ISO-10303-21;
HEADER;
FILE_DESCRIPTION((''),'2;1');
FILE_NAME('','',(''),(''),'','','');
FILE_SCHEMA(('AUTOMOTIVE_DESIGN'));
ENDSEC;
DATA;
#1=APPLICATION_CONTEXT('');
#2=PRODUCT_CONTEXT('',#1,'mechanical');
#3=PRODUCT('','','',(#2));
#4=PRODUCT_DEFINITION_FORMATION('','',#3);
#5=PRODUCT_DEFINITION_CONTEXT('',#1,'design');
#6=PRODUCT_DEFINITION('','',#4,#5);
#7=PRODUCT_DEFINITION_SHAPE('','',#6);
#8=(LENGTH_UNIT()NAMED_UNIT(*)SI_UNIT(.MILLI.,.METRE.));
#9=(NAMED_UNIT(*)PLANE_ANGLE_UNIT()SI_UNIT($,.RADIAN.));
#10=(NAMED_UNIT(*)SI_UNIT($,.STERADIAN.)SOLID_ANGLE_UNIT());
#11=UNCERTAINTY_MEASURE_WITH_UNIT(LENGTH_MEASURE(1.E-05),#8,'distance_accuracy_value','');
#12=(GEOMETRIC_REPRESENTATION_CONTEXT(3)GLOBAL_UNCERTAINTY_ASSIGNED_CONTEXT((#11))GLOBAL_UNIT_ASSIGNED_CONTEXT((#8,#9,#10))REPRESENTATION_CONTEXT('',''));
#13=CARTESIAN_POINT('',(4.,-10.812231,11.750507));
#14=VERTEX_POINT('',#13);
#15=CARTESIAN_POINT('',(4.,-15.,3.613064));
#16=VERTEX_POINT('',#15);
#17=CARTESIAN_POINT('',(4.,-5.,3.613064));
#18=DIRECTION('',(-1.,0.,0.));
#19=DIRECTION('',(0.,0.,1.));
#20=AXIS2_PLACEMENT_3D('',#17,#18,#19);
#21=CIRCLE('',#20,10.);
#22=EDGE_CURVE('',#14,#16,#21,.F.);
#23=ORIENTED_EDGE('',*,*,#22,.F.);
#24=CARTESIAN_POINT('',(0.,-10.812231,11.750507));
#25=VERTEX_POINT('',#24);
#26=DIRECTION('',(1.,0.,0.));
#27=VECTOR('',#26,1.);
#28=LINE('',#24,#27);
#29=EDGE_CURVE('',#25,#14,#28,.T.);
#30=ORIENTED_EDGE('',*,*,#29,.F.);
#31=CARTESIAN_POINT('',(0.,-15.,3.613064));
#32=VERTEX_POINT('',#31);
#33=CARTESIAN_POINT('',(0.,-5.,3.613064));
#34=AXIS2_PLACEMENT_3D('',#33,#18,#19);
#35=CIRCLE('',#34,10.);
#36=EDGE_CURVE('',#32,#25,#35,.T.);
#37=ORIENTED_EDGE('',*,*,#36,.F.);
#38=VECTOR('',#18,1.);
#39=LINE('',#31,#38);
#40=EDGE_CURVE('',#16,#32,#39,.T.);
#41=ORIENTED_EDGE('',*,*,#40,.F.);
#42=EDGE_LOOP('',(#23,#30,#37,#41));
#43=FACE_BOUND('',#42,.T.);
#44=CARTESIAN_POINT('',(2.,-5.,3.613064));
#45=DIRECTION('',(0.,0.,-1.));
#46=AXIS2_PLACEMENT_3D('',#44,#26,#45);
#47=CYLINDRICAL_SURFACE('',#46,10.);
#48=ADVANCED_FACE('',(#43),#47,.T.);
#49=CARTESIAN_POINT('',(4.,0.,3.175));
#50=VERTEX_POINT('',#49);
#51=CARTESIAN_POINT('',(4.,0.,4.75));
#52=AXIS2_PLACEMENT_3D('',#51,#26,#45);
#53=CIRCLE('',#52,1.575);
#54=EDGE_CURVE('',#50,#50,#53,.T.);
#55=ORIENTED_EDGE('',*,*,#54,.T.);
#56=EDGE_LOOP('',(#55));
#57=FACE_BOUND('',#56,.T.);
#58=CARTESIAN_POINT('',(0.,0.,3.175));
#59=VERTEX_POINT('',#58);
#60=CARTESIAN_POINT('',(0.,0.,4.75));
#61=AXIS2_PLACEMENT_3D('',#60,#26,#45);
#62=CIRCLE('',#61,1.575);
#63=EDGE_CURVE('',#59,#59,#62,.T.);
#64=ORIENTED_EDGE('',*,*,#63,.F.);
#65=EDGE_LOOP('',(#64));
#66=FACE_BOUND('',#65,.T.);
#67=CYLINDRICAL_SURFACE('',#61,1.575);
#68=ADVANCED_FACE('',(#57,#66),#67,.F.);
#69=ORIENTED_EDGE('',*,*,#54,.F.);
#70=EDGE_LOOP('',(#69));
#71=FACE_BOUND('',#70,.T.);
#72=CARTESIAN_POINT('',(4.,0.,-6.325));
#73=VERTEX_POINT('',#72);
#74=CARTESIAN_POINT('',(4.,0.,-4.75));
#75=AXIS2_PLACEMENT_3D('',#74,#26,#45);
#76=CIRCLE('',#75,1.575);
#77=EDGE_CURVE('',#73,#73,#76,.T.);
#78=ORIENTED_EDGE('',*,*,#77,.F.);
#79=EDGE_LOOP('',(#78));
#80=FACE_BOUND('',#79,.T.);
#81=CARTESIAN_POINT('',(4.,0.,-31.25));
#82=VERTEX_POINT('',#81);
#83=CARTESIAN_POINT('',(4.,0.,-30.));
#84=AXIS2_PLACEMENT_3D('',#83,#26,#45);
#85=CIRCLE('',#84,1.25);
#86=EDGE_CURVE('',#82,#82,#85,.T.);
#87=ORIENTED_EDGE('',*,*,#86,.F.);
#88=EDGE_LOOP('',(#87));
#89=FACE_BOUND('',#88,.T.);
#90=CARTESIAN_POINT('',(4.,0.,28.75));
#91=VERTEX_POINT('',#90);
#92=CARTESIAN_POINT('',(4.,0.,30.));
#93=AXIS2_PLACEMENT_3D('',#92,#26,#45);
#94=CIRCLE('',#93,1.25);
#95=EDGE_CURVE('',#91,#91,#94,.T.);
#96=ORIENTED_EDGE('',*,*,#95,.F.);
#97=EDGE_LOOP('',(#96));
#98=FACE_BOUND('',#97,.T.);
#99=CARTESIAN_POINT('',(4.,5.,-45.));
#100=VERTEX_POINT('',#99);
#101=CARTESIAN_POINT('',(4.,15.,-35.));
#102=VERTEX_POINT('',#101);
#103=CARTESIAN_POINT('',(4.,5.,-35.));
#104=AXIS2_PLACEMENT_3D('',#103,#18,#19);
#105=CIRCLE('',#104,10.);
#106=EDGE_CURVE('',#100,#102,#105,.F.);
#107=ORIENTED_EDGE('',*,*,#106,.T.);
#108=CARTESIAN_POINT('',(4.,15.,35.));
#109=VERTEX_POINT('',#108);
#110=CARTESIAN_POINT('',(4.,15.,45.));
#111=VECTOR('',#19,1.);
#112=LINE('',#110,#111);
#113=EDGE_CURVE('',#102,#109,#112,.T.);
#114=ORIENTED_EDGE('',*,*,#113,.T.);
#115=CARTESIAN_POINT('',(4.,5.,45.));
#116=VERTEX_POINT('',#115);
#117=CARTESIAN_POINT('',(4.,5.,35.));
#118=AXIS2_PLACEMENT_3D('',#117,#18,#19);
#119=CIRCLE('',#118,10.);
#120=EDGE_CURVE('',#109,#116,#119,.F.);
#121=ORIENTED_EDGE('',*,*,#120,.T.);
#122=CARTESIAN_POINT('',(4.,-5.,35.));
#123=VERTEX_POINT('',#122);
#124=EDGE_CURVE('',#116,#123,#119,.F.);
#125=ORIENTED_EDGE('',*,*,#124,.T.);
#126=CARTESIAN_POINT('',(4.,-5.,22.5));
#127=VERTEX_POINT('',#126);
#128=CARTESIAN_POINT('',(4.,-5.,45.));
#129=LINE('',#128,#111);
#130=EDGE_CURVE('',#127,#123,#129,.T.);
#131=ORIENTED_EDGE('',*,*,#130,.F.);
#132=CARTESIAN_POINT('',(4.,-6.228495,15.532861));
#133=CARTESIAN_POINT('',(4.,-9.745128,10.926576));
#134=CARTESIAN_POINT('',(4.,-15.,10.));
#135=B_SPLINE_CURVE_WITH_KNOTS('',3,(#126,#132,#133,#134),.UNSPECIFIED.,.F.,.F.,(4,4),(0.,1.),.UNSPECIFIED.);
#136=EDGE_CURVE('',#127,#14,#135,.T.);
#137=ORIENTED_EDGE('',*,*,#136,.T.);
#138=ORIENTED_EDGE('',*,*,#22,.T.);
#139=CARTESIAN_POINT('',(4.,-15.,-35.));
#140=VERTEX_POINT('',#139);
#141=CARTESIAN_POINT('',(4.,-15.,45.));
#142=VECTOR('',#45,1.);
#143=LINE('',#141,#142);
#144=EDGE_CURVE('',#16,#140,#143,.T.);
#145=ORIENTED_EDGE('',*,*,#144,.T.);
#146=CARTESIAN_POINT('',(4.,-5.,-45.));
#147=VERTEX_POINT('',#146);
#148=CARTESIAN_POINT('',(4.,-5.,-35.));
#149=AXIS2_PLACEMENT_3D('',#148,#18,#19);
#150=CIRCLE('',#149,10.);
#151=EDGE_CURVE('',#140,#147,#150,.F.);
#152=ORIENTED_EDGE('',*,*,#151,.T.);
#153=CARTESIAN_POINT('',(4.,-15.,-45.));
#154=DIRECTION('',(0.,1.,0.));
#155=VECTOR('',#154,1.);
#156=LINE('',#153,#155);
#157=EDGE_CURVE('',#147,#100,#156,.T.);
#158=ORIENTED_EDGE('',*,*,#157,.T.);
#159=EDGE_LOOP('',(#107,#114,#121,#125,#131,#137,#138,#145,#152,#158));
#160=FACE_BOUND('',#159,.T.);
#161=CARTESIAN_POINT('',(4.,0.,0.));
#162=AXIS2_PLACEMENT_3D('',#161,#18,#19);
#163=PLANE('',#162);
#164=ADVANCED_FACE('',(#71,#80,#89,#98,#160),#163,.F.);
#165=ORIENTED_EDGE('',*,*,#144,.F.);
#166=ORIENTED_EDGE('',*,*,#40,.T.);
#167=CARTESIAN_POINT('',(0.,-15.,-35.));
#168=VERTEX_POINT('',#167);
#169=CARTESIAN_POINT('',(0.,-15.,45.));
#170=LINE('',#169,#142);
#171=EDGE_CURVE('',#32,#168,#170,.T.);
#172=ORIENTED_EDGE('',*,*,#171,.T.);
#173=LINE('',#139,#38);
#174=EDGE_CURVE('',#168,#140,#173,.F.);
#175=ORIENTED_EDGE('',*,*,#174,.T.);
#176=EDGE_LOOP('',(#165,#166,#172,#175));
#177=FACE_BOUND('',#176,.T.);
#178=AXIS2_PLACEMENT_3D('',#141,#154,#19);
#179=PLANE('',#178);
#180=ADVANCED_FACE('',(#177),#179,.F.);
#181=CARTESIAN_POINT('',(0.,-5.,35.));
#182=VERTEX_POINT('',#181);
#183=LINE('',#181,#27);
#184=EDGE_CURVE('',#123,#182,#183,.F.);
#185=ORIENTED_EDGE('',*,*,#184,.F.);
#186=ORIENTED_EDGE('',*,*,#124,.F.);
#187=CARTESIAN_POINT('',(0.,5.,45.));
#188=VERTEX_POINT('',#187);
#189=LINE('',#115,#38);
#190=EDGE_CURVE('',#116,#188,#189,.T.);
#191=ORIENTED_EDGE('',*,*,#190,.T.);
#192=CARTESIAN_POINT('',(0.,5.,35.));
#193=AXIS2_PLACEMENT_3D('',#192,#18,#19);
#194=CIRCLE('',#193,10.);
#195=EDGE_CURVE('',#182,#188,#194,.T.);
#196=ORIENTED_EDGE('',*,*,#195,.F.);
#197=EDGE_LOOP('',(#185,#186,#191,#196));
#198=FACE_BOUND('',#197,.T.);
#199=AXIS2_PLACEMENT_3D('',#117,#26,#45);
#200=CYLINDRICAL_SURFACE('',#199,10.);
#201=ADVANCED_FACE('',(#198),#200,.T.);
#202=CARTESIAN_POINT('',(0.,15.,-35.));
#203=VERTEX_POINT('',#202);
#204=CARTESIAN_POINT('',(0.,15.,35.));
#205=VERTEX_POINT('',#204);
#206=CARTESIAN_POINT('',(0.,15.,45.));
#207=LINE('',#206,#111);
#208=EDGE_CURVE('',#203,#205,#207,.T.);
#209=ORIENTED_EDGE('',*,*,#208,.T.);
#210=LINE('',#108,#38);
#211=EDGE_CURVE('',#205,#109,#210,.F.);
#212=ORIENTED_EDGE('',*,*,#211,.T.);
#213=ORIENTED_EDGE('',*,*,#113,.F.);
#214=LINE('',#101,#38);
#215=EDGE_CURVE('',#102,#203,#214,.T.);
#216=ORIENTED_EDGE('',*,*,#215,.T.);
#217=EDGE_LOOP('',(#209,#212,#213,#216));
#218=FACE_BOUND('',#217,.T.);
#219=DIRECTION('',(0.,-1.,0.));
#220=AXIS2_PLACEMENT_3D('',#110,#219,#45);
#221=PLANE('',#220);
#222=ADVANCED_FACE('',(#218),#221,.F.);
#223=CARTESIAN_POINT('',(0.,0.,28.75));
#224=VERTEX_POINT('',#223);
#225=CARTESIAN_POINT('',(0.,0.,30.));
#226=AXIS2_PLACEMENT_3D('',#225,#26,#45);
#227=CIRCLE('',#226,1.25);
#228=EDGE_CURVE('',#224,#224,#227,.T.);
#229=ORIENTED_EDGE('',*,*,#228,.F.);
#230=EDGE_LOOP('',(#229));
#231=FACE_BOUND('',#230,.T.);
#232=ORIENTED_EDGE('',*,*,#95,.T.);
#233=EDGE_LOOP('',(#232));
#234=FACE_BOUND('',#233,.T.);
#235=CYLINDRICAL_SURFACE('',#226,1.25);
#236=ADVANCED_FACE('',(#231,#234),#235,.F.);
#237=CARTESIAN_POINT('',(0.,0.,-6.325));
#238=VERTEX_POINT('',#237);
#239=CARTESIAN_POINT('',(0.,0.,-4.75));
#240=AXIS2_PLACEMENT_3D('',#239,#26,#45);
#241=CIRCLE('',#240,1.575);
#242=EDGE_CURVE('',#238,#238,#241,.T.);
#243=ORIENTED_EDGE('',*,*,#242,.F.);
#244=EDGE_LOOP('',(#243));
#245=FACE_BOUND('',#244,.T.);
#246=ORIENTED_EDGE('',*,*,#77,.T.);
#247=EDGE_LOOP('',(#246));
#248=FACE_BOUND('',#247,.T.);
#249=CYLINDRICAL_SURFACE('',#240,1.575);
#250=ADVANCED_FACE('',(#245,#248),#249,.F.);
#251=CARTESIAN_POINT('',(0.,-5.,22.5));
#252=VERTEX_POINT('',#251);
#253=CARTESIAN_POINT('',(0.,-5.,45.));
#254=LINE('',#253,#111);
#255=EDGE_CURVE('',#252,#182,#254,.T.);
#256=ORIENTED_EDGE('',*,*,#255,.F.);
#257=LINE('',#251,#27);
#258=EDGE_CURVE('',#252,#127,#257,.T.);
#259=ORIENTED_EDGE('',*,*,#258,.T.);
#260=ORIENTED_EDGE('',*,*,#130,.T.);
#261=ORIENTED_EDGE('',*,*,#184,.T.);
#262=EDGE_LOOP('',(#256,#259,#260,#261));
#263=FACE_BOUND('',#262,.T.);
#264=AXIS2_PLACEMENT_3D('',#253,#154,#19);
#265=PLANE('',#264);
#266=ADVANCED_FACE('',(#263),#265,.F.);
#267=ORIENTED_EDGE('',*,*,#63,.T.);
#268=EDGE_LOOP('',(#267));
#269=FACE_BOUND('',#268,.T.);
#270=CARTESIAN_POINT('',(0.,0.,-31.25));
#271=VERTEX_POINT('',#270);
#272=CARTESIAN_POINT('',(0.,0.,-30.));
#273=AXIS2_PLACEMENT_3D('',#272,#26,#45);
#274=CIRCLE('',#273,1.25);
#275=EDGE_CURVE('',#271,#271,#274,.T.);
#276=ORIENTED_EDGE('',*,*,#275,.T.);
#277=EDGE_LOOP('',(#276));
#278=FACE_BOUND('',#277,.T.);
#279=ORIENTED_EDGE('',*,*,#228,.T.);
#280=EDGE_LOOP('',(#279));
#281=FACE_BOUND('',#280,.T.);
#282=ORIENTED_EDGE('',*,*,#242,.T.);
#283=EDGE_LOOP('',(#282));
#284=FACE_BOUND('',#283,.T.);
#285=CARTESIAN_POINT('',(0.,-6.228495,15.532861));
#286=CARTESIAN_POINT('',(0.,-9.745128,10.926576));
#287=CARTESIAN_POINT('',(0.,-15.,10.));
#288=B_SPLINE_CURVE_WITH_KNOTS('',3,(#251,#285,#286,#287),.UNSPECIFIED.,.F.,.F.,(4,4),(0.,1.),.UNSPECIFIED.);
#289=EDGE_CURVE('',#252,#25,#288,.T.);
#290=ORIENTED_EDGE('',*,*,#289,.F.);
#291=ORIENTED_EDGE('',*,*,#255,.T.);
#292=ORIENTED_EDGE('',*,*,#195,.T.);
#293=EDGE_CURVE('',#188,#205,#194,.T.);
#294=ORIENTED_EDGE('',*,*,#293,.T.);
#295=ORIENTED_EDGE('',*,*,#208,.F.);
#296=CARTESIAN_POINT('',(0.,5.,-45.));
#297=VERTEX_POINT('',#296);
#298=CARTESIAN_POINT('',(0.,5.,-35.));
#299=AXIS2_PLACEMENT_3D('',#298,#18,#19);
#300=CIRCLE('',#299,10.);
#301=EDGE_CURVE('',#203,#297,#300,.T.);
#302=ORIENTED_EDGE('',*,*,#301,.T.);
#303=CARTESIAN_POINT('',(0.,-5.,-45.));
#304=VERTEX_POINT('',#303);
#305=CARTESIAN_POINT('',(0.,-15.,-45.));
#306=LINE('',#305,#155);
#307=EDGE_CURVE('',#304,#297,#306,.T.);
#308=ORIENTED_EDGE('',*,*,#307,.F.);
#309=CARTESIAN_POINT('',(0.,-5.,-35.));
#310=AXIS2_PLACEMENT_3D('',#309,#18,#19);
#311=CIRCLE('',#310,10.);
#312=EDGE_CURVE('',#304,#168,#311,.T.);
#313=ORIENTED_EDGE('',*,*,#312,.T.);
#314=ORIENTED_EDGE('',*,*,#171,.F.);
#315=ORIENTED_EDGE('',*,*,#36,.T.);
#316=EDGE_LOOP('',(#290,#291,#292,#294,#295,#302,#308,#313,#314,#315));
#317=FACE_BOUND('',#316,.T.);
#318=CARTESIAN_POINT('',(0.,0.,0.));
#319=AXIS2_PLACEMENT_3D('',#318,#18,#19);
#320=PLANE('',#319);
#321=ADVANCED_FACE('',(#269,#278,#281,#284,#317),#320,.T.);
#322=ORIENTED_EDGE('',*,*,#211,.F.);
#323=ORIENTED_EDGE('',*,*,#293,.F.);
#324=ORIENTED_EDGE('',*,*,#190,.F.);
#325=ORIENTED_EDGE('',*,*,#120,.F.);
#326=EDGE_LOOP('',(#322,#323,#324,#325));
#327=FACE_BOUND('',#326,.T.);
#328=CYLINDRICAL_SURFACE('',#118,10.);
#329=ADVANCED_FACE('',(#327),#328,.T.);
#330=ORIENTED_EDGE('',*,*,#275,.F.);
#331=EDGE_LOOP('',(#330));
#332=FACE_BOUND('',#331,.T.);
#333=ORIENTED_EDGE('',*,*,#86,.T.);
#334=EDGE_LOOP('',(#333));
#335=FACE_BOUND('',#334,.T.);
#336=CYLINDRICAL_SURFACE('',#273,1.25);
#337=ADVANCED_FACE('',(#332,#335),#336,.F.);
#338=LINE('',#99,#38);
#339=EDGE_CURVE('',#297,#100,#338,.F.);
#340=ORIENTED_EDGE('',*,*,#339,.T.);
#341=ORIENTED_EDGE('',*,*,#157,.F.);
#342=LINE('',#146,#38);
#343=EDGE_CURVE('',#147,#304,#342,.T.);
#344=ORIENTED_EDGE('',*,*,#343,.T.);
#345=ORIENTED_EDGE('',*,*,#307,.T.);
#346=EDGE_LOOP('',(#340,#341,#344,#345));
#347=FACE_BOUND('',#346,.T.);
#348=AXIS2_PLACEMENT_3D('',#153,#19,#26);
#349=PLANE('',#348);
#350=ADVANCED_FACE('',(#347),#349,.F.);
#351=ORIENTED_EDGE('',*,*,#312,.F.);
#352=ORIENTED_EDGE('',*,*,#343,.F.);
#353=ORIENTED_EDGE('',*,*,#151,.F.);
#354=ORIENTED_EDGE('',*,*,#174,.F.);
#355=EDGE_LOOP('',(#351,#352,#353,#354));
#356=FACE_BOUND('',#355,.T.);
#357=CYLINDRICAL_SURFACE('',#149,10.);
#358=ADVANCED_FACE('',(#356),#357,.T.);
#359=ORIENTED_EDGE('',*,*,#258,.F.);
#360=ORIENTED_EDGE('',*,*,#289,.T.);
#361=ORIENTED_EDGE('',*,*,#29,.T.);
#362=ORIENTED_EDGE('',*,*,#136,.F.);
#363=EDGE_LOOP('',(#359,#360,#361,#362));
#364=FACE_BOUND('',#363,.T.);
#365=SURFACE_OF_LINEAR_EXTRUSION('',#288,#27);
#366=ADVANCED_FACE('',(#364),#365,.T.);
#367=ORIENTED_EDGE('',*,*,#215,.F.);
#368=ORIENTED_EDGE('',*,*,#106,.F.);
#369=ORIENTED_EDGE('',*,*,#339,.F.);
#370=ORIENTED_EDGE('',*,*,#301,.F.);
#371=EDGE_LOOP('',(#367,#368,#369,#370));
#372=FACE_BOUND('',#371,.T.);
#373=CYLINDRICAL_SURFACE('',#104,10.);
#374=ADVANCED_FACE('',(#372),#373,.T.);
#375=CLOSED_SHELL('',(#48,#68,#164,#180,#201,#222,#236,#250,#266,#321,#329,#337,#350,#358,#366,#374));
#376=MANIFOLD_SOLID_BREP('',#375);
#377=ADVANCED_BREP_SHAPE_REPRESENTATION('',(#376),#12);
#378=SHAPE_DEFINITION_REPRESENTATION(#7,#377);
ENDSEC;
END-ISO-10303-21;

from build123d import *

# Parameters (mm, degrees)
SKETCH1_W           = 90
SKETCH1_H           = 30
BOSS_EXTRUDE1_DEPTH = 4
SKETCH6_R           = 1.575
CUT_EXTRUDE6_DEPTH  = 48.602520942
SKETCH7_R           = 1.575
CUT_EXTRUDE7_DEPTH  = 48.602520942
SKETCH13_R          = 1.25
CUT_EXTRUDE13_DEPTH = 48.602520942
SKETCH14_R          = 1.25
CUT_EXTRUDE14_DEPTH = 48.602520942
SKETCH15_W          = 15
SKETCH15_H          = 10
CUT_EXTRUDE15_DEPTH = 48.602520942
FILLET1_R           = 10
SKETCH16_W          = 20
SKETCH16_H          = 10
CUT_EXTRUDE16_DEPTH = 48.602520942
FILLET2_R           = 10
BOSS_EXTRUDE2_DEPTH = 4
FILLET3_R           = 10


with BuildPart() as part:
    # Sketch1 → Boss-Extrude1 (new body)
    with BuildSketch(Plane(origin=(0, 0, 0), x_dir=(0, 0, -1), z_dir=(1, 0, 0))):
        Rectangle(SKETCH1_W, SKETCH1_H)
    extrude(amount=BOSS_EXTRUDE1_DEPTH)

    # Sketch6 → Cut-Extrude6 (cut, through all)
    with BuildSketch(Plane(origin=(4, 0, 0), x_dir=(0, 0, -1), z_dir=(1, 0, 0))):
        with Locations((-4.75, 0)):
            Circle(SKETCH6_R)
    extrude(amount=-CUT_EXTRUDE6_DEPTH, mode=Mode.SUBTRACT)

    # Sketch7 → Cut-Extrude7 (cut, through all)
    with BuildSketch(Plane(origin=(4, 0, 0), x_dir=(0, 0, -1), z_dir=(1, 0, 0))):
        with Locations((4.75, 0)):
            Circle(SKETCH7_R)
    extrude(amount=-CUT_EXTRUDE7_DEPTH, mode=Mode.SUBTRACT)

    # Sketch13 → Cut-Extrude13 (cut, through all)
    with BuildSketch(Plane(origin=(4, 0, 0), x_dir=(0, 0, -1), z_dir=(1, 0, 0))):
        with Locations((-30, 0)):
            Circle(SKETCH13_R)
    extrude(amount=-CUT_EXTRUDE13_DEPTH, mode=Mode.SUBTRACT)

    # Sketch14 → Cut-Extrude14 (cut, through all)
    with BuildSketch(Plane(origin=(4, 0, 0), x_dir=(0, 0, -1), z_dir=(1, 0, 0))):
        with Locations((30, 0)):
            Circle(SKETCH14_R)
    extrude(amount=-CUT_EXTRUDE14_DEPTH, mode=Mode.SUBTRACT)

    # Sketch15 → Cut-Extrude15 (cut, through all)
    with BuildSketch(Plane(origin=(4, 0, 0), x_dir=(0, 0, -1), z_dir=(1, 0, 0))):
        with Locations((-37.5, -10)):
            Rectangle(SKETCH15_W, SKETCH15_H)
    extrude(amount=-CUT_EXTRUDE15_DEPTH, mode=Mode.SUBTRACT)

    # Fillet1
    fillet1_edges = [part.edges().sort_by_distance(p)[0] for p in [
        (2, -15, -45),
        (2, 15, 45),
        (2, 15, -45),
    ]]
    fillet(fillet1_edges, radius=FILLET1_R)

    # Sketch16 → Cut-Extrude16 (cut, through all)
    with BuildSketch(Plane(origin=(4, 0, 0), x_dir=(0, 0, -1), z_dir=(1, 0, 0))):
        with Locations((-20, -10)):
            Rectangle(SKETCH16_W, SKETCH16_H)
    extrude(amount=-CUT_EXTRUDE16_DEPTH, mode=Mode.SUBTRACT)

    # Fillet2
    fillet2_edges = [part.edges().sort_by_distance(p)[0] for p in [
        (2, -5, 45),
    ]]
    fillet(fillet2_edges, radius=FILLET2_R - 0.0001)  # a hair under: the kernel refuses the full size

    # Sketch17 → Boss-Extrude2 (add)
    with BuildSketch(Plane(origin=(4, 0, 0), x_dir=(0, 0, -1), z_dir=(1, 0, 0))):
        with BuildLine():
            Line((-22.5, -5), (-10, -5))
            Line((-10, -5), (-10, -15))
            add(Edge.make_bspline(
                [(-10, -15), (-10.926575713, -9.745128006), (-15.532860799, -6.228494619), (-22.5, -5)],
                knots=[0, 0, 0, 0, 1, 1, 1, 1], degree=3))
        make_face()
    extrude(amount=-BOSS_EXTRUDE2_DEPTH)

    # Fillet3
    fillet3_edges = [part.edges().sort_by_distance(p)[0] for p in [
        (2, -15, 10),
    ]]
    fillet(fillet3_edges, radius=FILLET3_R)


solid = part.part
